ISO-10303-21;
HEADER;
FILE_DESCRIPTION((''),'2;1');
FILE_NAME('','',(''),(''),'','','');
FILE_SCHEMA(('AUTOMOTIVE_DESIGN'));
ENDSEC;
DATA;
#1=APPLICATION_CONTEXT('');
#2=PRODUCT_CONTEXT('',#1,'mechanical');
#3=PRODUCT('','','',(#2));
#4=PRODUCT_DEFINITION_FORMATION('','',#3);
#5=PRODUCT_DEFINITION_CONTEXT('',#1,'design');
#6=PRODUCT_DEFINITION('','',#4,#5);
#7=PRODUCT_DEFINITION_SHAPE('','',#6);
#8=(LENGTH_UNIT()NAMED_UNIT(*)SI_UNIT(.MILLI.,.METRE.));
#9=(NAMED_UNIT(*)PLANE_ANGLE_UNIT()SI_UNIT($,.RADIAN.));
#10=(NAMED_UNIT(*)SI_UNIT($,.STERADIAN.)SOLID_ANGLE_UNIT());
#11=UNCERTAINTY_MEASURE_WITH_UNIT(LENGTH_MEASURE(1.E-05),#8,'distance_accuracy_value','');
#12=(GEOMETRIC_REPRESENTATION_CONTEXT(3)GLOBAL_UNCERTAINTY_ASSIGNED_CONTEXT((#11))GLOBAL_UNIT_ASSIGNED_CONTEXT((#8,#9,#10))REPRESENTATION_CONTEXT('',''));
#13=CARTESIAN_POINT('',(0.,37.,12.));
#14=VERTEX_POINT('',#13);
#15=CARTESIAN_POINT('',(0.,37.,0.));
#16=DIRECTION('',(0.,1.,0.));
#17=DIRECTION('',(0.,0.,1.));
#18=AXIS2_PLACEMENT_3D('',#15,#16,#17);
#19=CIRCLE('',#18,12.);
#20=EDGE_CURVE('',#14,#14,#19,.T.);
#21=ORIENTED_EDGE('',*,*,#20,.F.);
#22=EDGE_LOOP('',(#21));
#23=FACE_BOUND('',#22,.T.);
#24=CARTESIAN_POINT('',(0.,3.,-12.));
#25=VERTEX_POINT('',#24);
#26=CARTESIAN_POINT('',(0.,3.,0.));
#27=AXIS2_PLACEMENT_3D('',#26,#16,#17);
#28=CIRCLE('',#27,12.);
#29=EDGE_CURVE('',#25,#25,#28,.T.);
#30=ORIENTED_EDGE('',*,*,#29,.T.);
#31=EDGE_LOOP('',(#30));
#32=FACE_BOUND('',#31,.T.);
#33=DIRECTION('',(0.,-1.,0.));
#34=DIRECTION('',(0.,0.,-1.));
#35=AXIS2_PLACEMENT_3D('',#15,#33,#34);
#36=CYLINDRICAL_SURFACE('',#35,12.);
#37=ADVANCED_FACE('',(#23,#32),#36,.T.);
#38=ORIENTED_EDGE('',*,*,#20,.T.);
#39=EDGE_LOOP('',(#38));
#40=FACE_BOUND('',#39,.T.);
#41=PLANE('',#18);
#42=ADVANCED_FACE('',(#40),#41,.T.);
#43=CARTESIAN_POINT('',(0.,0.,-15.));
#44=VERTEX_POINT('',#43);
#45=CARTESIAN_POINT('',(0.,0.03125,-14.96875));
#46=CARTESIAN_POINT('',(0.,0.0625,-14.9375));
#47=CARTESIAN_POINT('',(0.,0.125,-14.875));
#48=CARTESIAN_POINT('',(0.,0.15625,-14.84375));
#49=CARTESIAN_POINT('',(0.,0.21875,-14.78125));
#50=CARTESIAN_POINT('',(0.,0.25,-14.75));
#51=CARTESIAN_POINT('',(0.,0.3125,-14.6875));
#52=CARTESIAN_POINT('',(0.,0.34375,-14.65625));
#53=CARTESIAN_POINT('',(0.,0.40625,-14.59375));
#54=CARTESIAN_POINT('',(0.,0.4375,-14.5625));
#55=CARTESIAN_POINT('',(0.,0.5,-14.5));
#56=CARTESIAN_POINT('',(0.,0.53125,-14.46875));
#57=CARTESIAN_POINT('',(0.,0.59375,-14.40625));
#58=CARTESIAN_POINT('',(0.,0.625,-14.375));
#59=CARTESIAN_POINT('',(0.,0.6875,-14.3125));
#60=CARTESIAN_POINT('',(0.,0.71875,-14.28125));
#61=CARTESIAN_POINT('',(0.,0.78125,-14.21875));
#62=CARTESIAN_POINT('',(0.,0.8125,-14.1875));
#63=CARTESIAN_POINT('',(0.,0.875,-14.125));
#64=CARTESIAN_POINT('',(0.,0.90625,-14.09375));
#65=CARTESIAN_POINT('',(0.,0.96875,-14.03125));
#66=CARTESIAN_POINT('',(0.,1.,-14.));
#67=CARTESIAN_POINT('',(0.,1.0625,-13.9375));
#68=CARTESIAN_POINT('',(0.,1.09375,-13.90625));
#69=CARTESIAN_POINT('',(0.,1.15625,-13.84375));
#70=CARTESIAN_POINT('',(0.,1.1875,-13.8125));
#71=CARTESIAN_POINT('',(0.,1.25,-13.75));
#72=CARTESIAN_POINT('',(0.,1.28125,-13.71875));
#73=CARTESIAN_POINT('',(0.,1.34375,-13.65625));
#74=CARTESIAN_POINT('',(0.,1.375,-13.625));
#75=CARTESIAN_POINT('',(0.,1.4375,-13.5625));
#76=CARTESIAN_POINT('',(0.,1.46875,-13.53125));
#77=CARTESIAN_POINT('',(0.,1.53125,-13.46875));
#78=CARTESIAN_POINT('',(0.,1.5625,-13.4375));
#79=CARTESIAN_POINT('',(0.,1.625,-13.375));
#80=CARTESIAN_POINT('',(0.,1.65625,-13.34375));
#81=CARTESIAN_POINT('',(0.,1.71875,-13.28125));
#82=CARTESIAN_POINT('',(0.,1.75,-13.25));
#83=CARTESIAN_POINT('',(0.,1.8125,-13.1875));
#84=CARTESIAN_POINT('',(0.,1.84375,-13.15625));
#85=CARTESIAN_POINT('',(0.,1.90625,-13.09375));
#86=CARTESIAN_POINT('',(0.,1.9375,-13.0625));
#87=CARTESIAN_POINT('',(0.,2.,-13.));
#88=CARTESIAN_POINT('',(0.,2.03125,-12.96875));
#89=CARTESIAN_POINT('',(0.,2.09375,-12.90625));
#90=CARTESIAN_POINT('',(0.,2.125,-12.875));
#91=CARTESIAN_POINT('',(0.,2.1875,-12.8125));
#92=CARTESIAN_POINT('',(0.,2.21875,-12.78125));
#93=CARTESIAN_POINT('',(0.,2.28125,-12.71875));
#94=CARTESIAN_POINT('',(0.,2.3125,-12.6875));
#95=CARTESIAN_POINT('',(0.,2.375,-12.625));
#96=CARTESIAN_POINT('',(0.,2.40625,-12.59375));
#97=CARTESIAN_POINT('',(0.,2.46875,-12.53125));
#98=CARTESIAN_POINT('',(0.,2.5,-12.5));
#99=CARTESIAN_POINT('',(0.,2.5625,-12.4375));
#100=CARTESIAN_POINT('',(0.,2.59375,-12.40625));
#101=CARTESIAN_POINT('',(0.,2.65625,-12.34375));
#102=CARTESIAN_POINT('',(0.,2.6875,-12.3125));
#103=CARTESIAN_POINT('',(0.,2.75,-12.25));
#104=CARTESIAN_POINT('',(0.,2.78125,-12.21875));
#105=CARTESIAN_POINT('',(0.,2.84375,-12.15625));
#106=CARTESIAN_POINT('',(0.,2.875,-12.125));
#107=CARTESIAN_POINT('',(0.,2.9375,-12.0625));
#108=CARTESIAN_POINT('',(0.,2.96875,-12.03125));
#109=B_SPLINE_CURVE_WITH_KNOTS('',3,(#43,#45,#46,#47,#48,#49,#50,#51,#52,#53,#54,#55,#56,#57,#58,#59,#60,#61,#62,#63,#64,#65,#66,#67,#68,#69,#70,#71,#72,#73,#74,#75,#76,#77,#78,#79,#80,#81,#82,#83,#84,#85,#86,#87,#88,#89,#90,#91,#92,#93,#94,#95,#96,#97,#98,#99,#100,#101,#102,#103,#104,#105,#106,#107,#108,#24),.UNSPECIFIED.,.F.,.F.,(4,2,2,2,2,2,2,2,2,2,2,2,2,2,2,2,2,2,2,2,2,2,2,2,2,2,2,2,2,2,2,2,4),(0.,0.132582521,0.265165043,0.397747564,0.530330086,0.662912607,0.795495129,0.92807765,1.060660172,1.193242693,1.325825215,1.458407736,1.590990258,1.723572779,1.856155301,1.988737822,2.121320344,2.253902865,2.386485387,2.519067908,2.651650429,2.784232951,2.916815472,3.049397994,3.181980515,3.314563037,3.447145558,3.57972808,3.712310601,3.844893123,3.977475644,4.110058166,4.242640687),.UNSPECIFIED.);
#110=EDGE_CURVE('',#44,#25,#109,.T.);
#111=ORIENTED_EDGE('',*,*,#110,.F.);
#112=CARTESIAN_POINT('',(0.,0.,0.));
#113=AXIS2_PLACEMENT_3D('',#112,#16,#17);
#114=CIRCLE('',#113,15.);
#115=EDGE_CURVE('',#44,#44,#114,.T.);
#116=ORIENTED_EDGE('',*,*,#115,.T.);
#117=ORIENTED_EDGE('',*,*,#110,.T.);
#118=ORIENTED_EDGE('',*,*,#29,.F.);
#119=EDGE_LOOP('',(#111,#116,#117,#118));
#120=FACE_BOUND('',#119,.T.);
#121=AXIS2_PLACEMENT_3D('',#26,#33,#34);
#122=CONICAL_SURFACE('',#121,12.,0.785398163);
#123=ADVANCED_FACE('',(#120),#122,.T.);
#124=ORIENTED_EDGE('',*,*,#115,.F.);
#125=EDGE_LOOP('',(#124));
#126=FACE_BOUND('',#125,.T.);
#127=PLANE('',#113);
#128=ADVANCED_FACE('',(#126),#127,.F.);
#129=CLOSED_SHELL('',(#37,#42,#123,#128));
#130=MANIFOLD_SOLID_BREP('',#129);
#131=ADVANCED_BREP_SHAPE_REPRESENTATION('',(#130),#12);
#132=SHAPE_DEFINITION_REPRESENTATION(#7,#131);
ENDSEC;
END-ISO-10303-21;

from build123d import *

# Parameters (mm, degrees)
ESQUISSE1_R        = 15
BOSS_EXTRU_1_DEPTH = 3
CHANFREIN1_SIZE    = 3
ESQUISSE2_R        = 12
BOSS_EXTRU_2_DEPTH = 34


with BuildPart() as part:
    # Esquisse1 → Boss.-Extru.1 (new body)
    with BuildSketch(Plane(origin=(0, 0, 0), x_dir=(1, 0, 0), z_dir=(0, 1, 0))):
        with Locations(Location((0, 0, 0), (0, 0, 270))):
            Circle(ESQUISSE1_R)
    extrude(amount=BOSS_EXTRU_1_DEPTH)

    # Chanfrein1
    chanfrein1_edges = [part.edges().sort_by_distance(p)[0] for p in [
        (0, 3, -15),
    ]]
    chamfer(chanfrein1_edges, length=CHANFREIN1_SIZE - 0.0001)  # a hair under: the kernel refuses the full size

    # Esquisse2 → Boss.-Extru.2 (add)
    with BuildSketch(Plane(origin=(0, 3, 0), x_dir=(1, 0, 0), z_dir=(0, 1, 0))):
        with Locations(Location((0, 0, 0), (0, 0, 90))):
            Circle(ESQUISSE2_R)
    extrude(amount=BOSS_EXTRU_2_DEPTH)


solid = part.part
